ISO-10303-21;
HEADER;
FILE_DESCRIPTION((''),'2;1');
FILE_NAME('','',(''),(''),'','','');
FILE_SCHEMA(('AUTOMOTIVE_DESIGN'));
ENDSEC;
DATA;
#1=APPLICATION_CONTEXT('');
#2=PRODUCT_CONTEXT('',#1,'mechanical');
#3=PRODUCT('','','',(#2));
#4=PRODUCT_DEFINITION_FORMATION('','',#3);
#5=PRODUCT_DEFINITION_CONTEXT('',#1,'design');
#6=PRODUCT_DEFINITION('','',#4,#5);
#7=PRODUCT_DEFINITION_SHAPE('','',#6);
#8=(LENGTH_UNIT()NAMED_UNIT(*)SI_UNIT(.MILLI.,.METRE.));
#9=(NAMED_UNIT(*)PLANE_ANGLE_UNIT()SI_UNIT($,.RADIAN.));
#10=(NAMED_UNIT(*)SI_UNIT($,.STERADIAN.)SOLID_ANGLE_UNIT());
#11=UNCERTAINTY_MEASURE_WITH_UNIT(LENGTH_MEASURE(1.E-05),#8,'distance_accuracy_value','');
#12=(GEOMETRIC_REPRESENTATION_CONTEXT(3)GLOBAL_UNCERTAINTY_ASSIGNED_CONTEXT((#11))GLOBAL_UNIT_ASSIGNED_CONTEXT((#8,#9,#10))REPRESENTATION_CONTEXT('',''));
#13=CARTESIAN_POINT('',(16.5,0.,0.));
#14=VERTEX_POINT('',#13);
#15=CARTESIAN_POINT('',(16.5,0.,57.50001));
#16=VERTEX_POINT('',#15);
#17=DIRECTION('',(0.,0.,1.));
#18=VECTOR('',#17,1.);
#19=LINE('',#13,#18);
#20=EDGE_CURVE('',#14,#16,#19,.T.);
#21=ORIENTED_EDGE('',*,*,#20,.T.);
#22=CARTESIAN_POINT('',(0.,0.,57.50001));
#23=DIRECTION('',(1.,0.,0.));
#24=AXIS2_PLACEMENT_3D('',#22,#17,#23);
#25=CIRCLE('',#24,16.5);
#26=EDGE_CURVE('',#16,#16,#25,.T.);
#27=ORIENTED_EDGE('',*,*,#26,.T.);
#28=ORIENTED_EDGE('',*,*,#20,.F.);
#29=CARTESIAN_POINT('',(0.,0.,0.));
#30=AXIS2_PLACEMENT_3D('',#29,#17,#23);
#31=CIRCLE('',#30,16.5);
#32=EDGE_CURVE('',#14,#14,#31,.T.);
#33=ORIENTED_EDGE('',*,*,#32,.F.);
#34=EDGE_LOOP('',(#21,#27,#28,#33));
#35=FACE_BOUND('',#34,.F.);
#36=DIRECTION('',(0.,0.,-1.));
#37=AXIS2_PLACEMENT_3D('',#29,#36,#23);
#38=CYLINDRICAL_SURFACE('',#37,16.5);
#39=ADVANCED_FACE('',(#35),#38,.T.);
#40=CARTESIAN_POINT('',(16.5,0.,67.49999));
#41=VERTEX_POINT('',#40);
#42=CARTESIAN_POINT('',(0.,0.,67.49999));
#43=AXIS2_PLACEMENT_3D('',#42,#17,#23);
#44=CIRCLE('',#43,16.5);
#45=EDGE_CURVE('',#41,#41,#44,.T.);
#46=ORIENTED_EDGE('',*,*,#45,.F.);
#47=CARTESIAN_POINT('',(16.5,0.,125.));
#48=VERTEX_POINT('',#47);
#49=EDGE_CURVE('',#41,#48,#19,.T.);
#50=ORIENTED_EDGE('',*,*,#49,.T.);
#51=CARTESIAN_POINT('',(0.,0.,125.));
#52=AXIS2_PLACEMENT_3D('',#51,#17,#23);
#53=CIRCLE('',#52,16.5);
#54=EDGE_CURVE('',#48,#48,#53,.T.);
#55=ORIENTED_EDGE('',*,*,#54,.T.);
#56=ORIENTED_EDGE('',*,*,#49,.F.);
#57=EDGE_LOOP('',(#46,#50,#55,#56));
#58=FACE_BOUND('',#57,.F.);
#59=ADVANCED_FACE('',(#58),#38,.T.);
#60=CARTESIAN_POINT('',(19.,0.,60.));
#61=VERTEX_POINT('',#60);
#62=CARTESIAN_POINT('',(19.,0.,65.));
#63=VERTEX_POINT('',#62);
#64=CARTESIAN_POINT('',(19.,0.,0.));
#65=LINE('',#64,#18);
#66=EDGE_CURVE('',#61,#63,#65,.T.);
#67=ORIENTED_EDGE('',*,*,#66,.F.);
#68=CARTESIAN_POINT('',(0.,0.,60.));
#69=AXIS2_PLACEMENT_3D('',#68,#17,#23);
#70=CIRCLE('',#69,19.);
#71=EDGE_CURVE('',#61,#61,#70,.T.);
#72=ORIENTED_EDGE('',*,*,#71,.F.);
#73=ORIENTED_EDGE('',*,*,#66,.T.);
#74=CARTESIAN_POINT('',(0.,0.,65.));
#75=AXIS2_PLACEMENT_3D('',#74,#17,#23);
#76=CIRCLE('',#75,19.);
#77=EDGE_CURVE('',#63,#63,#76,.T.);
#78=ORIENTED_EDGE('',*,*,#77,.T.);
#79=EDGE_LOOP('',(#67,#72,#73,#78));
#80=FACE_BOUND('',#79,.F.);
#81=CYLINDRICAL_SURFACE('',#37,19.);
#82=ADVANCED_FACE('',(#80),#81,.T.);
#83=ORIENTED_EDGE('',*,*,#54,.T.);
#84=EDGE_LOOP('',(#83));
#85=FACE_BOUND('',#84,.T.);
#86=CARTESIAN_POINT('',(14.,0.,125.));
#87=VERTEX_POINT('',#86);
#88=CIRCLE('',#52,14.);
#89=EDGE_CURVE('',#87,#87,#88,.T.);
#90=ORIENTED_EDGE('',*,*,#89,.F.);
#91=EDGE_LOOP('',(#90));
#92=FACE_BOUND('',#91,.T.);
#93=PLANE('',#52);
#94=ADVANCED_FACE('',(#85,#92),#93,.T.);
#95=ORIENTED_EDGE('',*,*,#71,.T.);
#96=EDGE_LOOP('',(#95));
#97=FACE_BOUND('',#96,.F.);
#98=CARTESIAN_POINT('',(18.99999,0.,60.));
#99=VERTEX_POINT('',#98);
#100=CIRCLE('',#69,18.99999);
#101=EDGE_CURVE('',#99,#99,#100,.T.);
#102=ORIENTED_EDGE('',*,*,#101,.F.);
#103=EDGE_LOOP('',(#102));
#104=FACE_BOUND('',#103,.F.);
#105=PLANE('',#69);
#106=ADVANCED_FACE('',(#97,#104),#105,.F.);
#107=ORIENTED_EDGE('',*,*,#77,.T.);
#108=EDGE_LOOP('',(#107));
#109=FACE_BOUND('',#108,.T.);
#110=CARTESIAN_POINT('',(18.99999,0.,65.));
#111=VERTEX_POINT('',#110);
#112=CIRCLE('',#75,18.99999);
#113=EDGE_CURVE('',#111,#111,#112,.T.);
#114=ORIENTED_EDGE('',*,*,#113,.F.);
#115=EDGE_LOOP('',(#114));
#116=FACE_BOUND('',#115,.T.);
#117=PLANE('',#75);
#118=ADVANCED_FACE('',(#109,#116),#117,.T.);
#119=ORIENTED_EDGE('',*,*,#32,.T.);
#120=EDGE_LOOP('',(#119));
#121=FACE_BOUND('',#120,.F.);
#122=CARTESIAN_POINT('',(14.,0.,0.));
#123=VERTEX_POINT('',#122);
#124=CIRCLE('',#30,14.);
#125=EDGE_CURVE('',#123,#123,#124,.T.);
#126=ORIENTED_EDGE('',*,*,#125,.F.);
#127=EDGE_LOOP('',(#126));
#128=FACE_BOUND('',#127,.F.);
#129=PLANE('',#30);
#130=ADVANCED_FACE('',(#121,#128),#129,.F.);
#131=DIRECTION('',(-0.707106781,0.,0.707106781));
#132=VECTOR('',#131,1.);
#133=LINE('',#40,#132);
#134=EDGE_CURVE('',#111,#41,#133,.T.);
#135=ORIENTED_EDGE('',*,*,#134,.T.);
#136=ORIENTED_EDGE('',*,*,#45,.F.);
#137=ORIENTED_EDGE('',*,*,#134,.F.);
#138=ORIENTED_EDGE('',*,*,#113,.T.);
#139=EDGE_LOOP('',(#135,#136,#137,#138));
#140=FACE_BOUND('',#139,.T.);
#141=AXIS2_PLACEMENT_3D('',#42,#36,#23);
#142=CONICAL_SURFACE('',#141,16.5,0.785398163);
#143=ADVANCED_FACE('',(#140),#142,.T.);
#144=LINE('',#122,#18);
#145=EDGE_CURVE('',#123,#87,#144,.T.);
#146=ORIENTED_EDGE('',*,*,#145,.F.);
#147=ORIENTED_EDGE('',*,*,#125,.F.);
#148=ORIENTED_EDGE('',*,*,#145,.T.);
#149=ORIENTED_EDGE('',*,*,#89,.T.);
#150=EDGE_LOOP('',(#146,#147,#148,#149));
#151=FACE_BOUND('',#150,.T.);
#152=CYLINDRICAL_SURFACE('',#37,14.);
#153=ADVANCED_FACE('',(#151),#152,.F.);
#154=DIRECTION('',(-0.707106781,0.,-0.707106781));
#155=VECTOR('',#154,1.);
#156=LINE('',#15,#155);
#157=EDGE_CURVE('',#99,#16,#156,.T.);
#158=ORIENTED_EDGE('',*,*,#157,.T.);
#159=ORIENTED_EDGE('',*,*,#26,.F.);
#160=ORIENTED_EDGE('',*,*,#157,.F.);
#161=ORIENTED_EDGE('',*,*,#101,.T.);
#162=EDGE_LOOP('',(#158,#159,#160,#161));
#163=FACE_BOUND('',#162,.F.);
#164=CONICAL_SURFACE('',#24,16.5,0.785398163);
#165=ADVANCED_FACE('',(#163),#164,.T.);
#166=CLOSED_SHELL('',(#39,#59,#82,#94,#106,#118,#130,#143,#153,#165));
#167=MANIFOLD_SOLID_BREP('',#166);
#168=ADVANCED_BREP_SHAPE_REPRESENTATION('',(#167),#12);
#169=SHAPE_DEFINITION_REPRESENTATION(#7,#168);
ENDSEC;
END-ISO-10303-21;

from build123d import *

# Parameters (mm, degrees)
F0_R     = 16.5
F0_R_2   = 14
F1_DEPTH = 125
F0_R_3   = 19
F2_DEPTH = 65
F3_DEPTH = 60
F4_SIZE  = 2.49999


# Not quite as in the source:
# - a fillet or chamfer is up to 0.001 mm smaller than in the source, because OpenCascade refuses the exact size


with BuildPart() as f1:
    # F0 (on Top) → F1 (new body)
    with BuildSketch(Plane.XY):
        Circle(F0_R)
        Circle(F0_R_2, mode=Mode.SUBTRACT)
    extrude(amount=F1_DEPTH)

    # F0 (on Top) → F2 (join)
    with BuildSketch(Plane.XY):
        Circle(F0_R_3)
        Circle(F0_R, mode=Mode.SUBTRACT)
    extrude(amount=F2_DEPTH)

    # F0 (on Top) → F3 (cut)
    with BuildSketch(Plane.XY):
        Circle(F0_R_3)
        Circle(F0_R, mode=Mode.SUBTRACT)
    extrude(amount=F3_DEPTH, mode=Mode.SUBTRACT)

    # F4 (size 2.5 in the source; OpenCascade refuses exactly that, so slightly less here)
    f4_edges = [f1.edges().sort_by_distance(p)[0] for p in [
        (-16.5, 0, 60),
        (-16.5, 0, 65),
    ]]
    chamfer(f4_edges, length=F4_SIZE)


solid = f1.part
